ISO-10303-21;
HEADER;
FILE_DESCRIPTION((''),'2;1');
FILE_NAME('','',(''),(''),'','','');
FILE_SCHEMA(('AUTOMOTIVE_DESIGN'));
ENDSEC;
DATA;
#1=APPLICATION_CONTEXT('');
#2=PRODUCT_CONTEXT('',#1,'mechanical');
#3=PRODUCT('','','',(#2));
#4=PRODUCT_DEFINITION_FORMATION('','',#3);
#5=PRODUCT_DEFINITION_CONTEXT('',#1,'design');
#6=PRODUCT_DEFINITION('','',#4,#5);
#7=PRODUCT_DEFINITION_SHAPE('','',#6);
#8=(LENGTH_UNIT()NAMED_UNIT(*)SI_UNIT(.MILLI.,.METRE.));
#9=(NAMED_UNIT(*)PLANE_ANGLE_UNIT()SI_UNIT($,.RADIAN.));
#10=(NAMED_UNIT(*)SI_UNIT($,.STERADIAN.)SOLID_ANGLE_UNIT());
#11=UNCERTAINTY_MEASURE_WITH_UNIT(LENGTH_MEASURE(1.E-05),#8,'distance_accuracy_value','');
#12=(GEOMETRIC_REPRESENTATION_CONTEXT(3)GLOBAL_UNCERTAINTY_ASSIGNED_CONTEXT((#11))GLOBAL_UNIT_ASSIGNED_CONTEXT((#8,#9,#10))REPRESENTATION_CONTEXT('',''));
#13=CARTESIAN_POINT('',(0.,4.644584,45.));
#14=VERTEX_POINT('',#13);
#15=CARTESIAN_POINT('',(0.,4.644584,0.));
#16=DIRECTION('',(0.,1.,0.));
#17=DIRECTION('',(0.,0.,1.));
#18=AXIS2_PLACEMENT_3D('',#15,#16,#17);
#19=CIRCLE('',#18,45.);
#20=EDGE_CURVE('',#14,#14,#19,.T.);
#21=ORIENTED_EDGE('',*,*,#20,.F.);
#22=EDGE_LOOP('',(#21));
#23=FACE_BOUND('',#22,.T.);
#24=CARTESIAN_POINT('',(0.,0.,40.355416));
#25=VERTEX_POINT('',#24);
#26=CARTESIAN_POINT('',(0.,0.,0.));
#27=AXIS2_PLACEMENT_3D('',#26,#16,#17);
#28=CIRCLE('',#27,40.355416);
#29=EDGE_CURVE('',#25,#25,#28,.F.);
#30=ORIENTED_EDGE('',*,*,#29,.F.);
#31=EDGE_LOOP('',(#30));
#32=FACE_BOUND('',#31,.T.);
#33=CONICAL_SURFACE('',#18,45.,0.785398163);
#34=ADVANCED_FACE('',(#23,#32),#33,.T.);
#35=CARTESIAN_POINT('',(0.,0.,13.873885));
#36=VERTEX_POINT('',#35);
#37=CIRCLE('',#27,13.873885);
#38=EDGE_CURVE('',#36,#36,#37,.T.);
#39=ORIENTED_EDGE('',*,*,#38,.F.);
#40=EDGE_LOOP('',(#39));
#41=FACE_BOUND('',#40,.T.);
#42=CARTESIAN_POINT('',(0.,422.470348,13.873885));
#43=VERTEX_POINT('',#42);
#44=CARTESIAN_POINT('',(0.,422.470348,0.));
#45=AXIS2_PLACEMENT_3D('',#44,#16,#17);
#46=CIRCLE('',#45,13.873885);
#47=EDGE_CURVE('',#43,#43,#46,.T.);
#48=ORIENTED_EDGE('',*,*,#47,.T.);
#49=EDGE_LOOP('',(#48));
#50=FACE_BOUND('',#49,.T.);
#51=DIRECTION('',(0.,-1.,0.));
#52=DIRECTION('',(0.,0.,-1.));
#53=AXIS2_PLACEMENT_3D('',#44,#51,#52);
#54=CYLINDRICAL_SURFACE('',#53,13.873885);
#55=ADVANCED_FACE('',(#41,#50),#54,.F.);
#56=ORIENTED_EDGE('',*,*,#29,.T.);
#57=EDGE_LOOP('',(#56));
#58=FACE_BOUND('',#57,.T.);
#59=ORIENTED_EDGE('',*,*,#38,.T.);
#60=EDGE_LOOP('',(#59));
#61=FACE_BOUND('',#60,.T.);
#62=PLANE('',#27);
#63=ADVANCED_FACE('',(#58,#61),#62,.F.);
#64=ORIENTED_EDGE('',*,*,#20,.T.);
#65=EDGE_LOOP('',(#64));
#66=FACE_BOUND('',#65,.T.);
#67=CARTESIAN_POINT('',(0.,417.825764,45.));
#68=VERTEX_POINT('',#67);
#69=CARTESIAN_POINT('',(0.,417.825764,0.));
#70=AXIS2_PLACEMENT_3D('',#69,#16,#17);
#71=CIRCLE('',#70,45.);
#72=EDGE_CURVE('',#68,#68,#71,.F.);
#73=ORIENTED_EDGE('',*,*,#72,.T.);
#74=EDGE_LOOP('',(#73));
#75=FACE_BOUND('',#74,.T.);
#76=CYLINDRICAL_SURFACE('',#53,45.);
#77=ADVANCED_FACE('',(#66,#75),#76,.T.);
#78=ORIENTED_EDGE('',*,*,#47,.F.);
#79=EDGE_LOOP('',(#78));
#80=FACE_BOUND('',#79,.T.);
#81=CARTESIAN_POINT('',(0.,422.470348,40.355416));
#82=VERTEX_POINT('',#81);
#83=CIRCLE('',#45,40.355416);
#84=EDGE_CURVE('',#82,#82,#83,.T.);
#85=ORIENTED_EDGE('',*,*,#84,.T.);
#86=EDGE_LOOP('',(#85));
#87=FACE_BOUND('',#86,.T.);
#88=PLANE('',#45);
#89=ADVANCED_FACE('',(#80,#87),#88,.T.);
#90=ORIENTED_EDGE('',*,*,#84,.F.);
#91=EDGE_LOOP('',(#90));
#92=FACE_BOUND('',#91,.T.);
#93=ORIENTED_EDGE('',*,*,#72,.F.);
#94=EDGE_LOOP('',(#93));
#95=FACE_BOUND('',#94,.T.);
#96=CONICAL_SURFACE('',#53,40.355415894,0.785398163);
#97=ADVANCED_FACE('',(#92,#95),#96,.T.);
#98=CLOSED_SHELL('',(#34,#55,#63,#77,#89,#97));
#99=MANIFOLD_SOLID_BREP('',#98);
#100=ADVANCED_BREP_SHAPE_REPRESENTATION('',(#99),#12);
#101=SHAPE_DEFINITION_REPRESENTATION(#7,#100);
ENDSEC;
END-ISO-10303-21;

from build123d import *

# Parameters (mm, degrees)
SKETCH1_R           = 45
BOSS_EXTRUDE1_DEPTH = 422.470347814
SKETCH2_R           = 13.873885303
CUT_EXTRUDE1_DEPTH  = 428.236696437
CHAMFER1_SIZE       = 4.644584106


with BuildPart() as part:
    # Sketch1 → Boss-Extrude1 (new body)
    with BuildSketch(Plane(origin=(0, 0, 0), x_dir=(1, 0, 0), z_dir=(0, 1, 0))):
        Circle(SKETCH1_R)
    extrude(amount=BOSS_EXTRUDE1_DEPTH)

    # Sketch2 → Cut-Extrude1 (cut, through all)
    with BuildSketch(Plane(origin=(0, 0, 0), x_dir=(1, 0, 0), z_dir=(0, 1, 0))):
        Circle(SKETCH2_R)
    extrude(amount=CUT_EXTRUDE1_DEPTH, mode=Mode.SUBTRACT)

    # Chamfer1
    chamfer1_edges = [part.edges().sort_by_distance(p)[0] for p in [
        (-45, 422.470347814, 0),
        (-45, 0, 0),
    ]]
    chamfer(chamfer1_edges, length=CHAMFER1_SIZE)


solid = part.part
